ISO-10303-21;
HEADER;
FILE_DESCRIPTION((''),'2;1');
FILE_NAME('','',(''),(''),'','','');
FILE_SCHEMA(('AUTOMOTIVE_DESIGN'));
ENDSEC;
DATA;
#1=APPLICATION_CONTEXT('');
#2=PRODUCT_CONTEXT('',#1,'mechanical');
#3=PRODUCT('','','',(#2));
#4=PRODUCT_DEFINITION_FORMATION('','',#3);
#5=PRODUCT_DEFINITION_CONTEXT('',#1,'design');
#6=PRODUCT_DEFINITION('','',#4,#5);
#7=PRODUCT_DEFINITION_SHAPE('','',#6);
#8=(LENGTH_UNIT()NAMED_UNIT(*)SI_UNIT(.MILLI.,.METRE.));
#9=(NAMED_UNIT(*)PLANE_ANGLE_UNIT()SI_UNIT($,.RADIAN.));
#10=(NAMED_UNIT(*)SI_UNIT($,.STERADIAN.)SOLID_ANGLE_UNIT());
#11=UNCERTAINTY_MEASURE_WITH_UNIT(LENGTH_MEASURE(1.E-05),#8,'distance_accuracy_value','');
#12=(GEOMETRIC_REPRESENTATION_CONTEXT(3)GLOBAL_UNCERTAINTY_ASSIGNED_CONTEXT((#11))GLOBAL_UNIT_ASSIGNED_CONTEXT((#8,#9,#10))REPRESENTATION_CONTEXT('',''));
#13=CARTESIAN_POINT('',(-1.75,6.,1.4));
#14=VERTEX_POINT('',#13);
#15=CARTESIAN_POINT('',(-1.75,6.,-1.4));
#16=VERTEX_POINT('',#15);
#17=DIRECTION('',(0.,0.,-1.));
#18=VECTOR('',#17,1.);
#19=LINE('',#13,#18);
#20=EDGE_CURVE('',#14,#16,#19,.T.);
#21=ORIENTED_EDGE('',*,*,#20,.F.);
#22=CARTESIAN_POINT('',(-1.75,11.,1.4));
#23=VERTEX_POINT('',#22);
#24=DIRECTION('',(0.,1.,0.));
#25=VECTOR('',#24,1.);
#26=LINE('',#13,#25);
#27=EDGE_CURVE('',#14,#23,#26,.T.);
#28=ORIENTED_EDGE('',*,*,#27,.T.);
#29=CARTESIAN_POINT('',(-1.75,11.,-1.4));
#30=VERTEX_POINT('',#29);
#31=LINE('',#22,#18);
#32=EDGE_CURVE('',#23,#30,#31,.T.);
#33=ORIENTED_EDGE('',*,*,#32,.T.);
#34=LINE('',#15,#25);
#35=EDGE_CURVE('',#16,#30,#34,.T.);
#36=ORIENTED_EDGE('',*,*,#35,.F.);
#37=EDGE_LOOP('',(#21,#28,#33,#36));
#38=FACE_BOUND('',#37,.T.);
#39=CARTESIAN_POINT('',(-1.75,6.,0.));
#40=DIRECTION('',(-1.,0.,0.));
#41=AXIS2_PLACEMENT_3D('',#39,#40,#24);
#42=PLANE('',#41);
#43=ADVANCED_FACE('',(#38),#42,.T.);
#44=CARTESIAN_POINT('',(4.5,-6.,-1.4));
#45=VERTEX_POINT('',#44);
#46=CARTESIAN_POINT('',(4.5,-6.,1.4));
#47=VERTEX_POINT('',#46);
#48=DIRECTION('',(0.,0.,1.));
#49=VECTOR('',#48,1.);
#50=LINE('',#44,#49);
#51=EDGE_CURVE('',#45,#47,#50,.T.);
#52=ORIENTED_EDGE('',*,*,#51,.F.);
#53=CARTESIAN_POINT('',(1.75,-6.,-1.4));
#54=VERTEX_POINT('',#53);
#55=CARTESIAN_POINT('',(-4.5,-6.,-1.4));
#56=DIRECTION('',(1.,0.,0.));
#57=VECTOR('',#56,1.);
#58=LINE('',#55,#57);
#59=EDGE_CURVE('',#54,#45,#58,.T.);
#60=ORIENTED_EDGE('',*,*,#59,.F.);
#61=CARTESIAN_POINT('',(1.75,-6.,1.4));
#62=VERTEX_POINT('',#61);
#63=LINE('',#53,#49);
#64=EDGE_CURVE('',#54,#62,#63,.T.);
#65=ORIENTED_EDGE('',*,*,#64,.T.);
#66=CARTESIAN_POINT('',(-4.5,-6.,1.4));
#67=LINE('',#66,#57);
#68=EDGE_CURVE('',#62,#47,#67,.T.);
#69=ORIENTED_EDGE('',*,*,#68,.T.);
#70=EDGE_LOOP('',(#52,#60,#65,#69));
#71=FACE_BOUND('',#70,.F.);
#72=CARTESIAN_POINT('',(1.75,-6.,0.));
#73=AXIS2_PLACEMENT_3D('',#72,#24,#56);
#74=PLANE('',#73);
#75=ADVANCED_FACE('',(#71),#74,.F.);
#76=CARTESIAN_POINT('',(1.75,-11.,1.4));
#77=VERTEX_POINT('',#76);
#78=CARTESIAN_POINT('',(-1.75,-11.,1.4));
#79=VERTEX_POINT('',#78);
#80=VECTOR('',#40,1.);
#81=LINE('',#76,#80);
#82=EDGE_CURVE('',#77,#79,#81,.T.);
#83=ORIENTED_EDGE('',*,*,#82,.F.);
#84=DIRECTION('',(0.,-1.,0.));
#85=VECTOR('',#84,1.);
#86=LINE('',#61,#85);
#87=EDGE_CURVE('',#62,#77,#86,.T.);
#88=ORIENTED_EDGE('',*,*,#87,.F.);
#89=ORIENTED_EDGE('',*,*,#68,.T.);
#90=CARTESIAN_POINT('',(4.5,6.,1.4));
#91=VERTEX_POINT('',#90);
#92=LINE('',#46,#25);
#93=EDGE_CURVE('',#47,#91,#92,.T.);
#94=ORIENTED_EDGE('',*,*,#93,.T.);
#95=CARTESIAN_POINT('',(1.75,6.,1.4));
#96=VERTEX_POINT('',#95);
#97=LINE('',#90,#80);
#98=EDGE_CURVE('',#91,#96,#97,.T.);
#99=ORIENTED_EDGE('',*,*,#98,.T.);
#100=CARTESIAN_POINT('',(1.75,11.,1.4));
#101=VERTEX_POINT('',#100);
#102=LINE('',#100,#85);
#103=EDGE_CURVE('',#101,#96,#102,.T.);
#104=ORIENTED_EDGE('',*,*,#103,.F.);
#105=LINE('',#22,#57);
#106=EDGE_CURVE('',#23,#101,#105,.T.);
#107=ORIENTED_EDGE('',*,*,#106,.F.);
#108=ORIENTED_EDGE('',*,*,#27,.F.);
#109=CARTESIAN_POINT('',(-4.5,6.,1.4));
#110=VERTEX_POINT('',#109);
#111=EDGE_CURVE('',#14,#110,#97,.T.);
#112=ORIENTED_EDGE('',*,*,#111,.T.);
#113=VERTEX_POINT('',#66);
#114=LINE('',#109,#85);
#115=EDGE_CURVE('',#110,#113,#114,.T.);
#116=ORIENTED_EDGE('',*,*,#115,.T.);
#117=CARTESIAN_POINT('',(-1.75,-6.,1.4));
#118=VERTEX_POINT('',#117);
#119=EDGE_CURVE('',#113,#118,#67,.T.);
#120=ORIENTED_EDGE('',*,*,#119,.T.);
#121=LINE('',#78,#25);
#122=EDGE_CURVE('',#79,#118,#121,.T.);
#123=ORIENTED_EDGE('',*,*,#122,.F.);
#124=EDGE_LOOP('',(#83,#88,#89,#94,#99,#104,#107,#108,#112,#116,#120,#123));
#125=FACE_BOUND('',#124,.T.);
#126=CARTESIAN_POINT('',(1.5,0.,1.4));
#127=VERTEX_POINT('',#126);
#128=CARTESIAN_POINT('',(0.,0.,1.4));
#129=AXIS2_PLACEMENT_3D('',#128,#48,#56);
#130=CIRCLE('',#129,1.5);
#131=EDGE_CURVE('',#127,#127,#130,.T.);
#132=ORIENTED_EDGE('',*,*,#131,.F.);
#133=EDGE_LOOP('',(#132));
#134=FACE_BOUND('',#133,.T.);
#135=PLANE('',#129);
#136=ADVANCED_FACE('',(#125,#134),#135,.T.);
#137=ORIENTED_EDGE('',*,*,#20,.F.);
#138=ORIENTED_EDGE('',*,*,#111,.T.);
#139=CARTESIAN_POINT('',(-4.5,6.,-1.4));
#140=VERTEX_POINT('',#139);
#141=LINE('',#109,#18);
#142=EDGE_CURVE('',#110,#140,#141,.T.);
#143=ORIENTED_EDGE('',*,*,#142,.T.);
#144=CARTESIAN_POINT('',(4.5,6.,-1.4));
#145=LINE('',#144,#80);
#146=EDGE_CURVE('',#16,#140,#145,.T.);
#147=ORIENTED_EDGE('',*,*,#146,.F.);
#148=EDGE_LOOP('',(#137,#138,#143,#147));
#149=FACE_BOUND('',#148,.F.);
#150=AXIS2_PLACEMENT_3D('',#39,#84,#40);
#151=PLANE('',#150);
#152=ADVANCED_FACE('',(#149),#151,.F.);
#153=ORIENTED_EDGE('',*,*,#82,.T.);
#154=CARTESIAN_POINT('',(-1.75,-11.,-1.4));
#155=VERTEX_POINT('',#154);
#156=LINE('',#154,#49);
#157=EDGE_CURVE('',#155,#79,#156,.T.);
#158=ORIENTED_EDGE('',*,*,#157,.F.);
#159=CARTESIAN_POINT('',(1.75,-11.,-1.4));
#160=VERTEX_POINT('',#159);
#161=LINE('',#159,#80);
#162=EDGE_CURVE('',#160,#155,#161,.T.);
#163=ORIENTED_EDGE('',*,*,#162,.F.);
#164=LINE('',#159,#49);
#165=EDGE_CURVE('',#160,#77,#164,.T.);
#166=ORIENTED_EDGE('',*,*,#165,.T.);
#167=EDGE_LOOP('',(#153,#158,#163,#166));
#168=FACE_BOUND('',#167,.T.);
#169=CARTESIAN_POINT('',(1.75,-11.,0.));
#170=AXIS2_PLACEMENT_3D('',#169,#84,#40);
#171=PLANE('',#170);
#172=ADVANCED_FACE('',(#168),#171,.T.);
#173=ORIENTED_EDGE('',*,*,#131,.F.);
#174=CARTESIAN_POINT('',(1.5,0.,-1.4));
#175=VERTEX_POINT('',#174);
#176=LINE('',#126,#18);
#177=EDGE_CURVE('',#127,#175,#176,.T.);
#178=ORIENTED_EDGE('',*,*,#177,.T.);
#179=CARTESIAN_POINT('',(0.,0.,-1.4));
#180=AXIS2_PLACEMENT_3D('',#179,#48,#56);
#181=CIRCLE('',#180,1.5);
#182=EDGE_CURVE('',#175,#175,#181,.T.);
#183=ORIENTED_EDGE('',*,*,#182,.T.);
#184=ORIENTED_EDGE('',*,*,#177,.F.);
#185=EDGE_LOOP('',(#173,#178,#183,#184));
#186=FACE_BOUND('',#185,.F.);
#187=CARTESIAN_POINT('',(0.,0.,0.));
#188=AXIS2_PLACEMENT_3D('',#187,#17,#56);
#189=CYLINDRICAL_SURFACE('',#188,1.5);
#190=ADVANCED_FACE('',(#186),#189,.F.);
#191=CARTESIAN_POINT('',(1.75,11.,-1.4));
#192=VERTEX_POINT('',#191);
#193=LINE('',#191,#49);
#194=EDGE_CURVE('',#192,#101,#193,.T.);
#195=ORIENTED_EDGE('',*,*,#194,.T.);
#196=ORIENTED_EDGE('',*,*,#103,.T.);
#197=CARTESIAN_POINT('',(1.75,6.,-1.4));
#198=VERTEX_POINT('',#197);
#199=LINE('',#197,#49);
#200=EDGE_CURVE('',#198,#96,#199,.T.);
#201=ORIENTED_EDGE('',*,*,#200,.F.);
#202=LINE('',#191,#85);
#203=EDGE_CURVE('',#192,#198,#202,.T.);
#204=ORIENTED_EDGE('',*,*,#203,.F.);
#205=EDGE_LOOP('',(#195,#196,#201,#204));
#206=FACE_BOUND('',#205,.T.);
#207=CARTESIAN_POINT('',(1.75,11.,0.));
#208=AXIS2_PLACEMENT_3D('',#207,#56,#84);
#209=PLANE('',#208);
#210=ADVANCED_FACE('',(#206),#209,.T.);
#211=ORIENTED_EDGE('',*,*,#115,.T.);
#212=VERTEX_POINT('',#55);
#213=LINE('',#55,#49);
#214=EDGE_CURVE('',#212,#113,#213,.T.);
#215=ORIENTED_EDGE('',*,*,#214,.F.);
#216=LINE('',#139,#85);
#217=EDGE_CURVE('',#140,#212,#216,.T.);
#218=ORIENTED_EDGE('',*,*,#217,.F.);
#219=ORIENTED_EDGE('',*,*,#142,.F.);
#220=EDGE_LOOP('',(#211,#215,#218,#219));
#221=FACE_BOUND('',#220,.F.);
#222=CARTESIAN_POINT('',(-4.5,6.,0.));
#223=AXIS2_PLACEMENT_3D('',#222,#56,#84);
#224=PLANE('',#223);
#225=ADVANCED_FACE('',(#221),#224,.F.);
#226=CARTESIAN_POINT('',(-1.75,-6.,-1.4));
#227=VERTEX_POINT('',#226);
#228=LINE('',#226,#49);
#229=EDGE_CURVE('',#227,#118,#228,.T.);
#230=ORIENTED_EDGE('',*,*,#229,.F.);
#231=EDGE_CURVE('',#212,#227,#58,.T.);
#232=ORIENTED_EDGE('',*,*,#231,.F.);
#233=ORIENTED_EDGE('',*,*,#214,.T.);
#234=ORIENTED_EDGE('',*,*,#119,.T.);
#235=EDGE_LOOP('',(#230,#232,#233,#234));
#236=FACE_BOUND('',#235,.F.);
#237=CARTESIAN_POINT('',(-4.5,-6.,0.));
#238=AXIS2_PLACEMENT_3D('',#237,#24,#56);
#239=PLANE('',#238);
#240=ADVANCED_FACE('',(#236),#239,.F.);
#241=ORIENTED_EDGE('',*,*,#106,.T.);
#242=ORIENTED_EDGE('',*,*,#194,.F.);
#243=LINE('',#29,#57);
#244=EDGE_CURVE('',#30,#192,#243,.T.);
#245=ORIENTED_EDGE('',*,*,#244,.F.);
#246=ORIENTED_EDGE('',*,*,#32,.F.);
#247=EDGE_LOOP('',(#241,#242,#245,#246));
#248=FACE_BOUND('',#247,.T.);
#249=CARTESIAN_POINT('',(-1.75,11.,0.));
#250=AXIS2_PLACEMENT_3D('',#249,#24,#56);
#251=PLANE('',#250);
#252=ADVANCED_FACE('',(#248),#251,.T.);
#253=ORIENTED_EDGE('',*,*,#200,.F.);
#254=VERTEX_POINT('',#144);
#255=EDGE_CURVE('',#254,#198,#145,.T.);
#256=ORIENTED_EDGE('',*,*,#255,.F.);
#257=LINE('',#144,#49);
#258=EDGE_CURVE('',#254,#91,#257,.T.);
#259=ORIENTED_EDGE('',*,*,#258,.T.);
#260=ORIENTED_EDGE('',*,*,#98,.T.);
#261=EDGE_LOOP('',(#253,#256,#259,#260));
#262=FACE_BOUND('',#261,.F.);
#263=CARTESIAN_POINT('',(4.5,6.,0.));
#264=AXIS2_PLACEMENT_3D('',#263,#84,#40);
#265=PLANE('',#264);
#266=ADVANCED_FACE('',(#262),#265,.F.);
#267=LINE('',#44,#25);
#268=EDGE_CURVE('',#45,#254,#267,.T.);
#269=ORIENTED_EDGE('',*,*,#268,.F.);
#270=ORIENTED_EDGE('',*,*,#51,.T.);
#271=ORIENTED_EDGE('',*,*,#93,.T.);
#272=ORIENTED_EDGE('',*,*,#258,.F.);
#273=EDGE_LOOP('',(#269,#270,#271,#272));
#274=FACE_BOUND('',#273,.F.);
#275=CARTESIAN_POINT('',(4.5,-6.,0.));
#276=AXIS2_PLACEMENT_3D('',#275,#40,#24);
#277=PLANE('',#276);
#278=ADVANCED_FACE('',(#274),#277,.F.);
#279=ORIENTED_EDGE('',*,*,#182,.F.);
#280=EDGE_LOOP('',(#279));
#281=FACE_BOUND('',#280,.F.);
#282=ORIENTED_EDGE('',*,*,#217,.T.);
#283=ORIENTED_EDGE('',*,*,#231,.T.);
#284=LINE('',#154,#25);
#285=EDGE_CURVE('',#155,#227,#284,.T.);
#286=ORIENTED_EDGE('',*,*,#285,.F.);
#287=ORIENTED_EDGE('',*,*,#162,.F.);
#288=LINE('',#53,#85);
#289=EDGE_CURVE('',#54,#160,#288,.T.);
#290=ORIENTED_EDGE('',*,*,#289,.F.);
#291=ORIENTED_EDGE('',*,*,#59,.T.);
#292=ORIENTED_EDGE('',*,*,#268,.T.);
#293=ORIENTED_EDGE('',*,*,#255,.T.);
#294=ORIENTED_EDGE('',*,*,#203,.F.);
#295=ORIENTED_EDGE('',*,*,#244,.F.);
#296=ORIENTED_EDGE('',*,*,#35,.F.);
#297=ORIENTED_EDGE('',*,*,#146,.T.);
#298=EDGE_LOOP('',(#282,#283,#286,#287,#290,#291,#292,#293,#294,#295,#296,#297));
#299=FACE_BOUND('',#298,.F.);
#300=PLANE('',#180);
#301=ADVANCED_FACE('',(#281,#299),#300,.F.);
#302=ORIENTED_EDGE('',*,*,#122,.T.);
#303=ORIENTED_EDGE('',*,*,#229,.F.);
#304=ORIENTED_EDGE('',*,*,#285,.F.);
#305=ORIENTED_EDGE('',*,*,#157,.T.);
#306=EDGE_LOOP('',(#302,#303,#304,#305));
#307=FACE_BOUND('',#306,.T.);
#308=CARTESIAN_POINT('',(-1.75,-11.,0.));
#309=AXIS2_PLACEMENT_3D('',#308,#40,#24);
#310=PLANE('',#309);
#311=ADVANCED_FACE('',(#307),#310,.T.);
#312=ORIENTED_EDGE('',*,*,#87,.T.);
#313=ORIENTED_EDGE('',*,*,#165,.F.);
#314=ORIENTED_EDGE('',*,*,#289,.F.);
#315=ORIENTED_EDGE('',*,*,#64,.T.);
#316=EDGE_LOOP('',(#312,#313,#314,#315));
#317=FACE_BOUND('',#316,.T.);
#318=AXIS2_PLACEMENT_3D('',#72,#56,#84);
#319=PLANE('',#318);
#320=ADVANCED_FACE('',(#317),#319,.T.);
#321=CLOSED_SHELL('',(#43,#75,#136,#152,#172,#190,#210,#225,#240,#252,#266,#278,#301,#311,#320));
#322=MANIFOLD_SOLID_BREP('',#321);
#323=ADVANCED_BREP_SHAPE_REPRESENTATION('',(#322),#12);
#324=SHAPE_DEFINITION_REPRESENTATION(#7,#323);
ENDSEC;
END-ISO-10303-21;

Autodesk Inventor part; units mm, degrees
ref_plane "YZ Plane" through (0, 0, 0) normal (1, 0, 0) x (0, 1, 0)
ref_plane "XZ Plane" through (0, 0, 0) normal (0, 1, 0) x (-1, 0, 0)
ref_plane "XY Plane" through (0, 0, 0) normal (0, 0, 1) x (1, 0, 0)
sketch "Sketch1" plane through (0, 0, 0) normal (0, 0, 1) x (1, 0, 0)
  line L0 (-4.5, -6) -> (4.5, -6)
  line L1 (4.5, -6) -> (4.5, 6)
  line L2 (4.5, 6) -> (-4.5, 6)
  line L3 (-4.5, 6) -> (-4.5, -6)
  line L4 (-1.75, 11) -> (1.75, 11)
  line L5 (1.75, -11) -> (-1.75, -11)
  circle A0 centre (0, 0) radius 1.5
  line L6 (1.75, 11) -> (1.75, 6)
  line L7 (1.75, -6) -> (1.75, -11)
  line L8 (-1.75, -11) -> (-1.75, -6)
  line L9 (-1.75, 6) -> (-1.75, 11)
  dimension "d0" = 3
  dimension "d1" = 12
  dimension "d2" = 9
  dimension "d3" = 3.5
  dimension "d4" = 11
  dimension "d5" = 22
  dimension "d6" = 1.75
  dimension "d7" = 4.5
extrude "Extrusion1" add sketch "Sketch1" along normal mid plane 2.8
equation "\"d4\" = 0.5 * d5"
equation "\"d6\" = 0.5 * d3"
equation "\"d7\" = 0.5 * d2"
